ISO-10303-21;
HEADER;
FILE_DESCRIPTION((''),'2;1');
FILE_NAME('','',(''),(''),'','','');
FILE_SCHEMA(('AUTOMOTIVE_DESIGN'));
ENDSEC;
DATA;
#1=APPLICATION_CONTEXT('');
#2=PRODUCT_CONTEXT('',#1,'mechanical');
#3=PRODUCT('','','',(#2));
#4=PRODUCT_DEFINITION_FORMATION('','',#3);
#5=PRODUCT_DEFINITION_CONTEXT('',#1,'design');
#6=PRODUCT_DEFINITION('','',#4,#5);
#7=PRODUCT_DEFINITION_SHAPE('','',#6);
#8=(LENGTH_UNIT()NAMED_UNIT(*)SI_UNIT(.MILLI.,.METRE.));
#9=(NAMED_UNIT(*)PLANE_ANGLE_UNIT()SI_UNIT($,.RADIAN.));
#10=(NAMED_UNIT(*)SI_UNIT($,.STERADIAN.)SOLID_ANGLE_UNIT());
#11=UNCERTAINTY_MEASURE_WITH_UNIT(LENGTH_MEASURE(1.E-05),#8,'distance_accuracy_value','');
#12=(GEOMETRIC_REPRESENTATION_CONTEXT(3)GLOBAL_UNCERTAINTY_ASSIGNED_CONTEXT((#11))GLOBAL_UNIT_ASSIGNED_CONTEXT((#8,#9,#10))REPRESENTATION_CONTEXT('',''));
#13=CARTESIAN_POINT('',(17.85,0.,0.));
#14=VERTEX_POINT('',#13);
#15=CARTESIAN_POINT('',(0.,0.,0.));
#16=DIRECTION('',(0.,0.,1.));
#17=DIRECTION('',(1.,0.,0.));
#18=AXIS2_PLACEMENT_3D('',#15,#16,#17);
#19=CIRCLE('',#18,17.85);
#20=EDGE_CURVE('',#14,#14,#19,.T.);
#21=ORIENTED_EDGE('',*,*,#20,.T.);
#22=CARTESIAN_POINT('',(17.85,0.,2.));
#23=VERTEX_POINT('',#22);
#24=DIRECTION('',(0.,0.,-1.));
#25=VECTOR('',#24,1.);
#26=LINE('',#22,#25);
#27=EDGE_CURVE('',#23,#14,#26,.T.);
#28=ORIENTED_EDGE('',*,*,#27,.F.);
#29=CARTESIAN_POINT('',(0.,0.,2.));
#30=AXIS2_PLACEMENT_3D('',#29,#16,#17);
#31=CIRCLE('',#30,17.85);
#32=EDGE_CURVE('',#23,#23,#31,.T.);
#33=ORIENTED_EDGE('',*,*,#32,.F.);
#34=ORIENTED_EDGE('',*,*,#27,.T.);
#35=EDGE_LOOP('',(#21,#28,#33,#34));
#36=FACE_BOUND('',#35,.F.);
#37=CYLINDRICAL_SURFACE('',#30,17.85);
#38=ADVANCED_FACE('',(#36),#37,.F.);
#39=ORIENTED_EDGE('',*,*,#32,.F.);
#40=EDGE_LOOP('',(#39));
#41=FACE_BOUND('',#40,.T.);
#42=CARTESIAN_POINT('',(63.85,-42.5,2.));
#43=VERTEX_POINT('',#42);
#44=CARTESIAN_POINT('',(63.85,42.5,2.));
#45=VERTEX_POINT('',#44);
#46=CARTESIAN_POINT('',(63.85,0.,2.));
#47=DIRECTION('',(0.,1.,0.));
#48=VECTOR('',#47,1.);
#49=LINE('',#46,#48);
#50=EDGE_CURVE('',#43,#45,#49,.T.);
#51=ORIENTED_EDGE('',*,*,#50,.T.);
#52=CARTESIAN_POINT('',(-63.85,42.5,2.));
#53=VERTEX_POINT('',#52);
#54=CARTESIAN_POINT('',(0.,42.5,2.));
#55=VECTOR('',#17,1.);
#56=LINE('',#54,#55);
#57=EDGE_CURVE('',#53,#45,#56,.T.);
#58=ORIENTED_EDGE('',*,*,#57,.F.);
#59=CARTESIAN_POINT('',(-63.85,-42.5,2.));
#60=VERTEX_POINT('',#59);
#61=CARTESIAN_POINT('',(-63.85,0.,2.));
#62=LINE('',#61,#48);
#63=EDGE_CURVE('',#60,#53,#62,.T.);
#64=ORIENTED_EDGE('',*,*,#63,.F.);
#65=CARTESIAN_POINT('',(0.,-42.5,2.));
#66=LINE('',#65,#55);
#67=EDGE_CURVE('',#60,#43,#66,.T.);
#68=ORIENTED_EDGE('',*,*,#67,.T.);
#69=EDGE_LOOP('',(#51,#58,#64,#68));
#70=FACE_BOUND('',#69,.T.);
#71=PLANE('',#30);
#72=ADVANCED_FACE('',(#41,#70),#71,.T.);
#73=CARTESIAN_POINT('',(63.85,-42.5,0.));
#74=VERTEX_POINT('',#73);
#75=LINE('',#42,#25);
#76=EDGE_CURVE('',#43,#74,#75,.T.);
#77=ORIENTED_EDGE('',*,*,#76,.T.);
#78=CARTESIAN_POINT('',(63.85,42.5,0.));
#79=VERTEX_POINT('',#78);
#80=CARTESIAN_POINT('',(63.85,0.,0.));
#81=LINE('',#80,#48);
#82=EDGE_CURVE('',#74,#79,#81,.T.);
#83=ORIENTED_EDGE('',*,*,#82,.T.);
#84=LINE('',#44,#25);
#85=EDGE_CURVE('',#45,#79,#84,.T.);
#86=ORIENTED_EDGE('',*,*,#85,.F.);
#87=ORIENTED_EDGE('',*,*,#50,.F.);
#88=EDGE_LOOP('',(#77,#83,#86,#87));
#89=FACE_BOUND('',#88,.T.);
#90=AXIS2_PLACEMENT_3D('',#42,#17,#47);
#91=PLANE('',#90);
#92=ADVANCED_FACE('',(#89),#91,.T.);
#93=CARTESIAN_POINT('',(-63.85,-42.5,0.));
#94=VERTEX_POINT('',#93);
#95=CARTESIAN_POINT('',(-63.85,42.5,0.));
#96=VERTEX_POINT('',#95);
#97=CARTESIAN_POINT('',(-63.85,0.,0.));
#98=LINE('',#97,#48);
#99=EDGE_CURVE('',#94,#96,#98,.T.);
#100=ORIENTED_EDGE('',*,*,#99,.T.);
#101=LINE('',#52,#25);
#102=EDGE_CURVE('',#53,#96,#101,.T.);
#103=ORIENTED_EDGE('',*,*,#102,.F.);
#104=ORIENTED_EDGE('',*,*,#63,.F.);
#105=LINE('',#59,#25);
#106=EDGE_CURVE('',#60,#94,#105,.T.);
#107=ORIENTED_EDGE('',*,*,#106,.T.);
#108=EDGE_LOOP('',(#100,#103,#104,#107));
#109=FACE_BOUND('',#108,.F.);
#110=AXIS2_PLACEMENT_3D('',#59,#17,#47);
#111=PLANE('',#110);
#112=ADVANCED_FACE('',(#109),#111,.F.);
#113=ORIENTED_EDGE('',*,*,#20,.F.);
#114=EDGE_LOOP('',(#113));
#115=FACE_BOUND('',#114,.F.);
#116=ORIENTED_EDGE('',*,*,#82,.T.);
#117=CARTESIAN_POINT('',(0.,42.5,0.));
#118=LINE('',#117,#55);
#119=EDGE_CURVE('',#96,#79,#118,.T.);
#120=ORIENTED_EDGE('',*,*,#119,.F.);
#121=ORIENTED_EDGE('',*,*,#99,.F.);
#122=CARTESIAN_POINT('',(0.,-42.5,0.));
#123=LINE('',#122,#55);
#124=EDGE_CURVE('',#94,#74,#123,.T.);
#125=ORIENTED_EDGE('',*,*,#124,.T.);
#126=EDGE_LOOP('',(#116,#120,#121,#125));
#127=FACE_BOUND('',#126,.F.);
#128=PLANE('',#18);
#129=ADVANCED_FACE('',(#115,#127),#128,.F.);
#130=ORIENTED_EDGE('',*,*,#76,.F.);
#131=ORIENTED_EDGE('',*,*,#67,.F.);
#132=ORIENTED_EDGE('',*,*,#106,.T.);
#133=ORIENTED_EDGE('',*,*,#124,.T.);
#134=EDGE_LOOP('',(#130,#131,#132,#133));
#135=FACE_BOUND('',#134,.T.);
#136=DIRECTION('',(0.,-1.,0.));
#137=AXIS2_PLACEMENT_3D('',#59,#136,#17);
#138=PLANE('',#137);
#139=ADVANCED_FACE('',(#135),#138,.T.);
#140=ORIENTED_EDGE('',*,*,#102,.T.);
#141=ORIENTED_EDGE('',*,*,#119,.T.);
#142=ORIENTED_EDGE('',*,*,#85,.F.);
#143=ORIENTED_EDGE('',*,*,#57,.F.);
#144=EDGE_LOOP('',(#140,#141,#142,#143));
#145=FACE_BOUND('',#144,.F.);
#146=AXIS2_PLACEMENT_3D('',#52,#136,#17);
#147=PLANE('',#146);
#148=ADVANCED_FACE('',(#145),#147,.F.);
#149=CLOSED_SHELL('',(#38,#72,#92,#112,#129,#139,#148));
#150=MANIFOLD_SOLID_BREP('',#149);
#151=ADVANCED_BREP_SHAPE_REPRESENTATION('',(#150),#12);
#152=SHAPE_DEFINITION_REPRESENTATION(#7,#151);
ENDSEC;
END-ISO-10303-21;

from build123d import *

# Parameters (mm, degrees)
F2_W     = 127.7
F2_H     = 85
F2_R     = 17.85
F3_DEPTH = 2


# Not quite as in the source:
# - a feature names something its author has since deleted; it is built from what else it names


with BuildPart() as f3:
    # F2 (on offset) → F3 (new body)
    with BuildSketch(Plane.XY.offset(2)):
        Rectangle(F2_W, F2_H)
        Circle(F2_R, mode=Mode.SUBTRACT)
    extrude(amount=-F3_DEPTH)


solid = f3.part
